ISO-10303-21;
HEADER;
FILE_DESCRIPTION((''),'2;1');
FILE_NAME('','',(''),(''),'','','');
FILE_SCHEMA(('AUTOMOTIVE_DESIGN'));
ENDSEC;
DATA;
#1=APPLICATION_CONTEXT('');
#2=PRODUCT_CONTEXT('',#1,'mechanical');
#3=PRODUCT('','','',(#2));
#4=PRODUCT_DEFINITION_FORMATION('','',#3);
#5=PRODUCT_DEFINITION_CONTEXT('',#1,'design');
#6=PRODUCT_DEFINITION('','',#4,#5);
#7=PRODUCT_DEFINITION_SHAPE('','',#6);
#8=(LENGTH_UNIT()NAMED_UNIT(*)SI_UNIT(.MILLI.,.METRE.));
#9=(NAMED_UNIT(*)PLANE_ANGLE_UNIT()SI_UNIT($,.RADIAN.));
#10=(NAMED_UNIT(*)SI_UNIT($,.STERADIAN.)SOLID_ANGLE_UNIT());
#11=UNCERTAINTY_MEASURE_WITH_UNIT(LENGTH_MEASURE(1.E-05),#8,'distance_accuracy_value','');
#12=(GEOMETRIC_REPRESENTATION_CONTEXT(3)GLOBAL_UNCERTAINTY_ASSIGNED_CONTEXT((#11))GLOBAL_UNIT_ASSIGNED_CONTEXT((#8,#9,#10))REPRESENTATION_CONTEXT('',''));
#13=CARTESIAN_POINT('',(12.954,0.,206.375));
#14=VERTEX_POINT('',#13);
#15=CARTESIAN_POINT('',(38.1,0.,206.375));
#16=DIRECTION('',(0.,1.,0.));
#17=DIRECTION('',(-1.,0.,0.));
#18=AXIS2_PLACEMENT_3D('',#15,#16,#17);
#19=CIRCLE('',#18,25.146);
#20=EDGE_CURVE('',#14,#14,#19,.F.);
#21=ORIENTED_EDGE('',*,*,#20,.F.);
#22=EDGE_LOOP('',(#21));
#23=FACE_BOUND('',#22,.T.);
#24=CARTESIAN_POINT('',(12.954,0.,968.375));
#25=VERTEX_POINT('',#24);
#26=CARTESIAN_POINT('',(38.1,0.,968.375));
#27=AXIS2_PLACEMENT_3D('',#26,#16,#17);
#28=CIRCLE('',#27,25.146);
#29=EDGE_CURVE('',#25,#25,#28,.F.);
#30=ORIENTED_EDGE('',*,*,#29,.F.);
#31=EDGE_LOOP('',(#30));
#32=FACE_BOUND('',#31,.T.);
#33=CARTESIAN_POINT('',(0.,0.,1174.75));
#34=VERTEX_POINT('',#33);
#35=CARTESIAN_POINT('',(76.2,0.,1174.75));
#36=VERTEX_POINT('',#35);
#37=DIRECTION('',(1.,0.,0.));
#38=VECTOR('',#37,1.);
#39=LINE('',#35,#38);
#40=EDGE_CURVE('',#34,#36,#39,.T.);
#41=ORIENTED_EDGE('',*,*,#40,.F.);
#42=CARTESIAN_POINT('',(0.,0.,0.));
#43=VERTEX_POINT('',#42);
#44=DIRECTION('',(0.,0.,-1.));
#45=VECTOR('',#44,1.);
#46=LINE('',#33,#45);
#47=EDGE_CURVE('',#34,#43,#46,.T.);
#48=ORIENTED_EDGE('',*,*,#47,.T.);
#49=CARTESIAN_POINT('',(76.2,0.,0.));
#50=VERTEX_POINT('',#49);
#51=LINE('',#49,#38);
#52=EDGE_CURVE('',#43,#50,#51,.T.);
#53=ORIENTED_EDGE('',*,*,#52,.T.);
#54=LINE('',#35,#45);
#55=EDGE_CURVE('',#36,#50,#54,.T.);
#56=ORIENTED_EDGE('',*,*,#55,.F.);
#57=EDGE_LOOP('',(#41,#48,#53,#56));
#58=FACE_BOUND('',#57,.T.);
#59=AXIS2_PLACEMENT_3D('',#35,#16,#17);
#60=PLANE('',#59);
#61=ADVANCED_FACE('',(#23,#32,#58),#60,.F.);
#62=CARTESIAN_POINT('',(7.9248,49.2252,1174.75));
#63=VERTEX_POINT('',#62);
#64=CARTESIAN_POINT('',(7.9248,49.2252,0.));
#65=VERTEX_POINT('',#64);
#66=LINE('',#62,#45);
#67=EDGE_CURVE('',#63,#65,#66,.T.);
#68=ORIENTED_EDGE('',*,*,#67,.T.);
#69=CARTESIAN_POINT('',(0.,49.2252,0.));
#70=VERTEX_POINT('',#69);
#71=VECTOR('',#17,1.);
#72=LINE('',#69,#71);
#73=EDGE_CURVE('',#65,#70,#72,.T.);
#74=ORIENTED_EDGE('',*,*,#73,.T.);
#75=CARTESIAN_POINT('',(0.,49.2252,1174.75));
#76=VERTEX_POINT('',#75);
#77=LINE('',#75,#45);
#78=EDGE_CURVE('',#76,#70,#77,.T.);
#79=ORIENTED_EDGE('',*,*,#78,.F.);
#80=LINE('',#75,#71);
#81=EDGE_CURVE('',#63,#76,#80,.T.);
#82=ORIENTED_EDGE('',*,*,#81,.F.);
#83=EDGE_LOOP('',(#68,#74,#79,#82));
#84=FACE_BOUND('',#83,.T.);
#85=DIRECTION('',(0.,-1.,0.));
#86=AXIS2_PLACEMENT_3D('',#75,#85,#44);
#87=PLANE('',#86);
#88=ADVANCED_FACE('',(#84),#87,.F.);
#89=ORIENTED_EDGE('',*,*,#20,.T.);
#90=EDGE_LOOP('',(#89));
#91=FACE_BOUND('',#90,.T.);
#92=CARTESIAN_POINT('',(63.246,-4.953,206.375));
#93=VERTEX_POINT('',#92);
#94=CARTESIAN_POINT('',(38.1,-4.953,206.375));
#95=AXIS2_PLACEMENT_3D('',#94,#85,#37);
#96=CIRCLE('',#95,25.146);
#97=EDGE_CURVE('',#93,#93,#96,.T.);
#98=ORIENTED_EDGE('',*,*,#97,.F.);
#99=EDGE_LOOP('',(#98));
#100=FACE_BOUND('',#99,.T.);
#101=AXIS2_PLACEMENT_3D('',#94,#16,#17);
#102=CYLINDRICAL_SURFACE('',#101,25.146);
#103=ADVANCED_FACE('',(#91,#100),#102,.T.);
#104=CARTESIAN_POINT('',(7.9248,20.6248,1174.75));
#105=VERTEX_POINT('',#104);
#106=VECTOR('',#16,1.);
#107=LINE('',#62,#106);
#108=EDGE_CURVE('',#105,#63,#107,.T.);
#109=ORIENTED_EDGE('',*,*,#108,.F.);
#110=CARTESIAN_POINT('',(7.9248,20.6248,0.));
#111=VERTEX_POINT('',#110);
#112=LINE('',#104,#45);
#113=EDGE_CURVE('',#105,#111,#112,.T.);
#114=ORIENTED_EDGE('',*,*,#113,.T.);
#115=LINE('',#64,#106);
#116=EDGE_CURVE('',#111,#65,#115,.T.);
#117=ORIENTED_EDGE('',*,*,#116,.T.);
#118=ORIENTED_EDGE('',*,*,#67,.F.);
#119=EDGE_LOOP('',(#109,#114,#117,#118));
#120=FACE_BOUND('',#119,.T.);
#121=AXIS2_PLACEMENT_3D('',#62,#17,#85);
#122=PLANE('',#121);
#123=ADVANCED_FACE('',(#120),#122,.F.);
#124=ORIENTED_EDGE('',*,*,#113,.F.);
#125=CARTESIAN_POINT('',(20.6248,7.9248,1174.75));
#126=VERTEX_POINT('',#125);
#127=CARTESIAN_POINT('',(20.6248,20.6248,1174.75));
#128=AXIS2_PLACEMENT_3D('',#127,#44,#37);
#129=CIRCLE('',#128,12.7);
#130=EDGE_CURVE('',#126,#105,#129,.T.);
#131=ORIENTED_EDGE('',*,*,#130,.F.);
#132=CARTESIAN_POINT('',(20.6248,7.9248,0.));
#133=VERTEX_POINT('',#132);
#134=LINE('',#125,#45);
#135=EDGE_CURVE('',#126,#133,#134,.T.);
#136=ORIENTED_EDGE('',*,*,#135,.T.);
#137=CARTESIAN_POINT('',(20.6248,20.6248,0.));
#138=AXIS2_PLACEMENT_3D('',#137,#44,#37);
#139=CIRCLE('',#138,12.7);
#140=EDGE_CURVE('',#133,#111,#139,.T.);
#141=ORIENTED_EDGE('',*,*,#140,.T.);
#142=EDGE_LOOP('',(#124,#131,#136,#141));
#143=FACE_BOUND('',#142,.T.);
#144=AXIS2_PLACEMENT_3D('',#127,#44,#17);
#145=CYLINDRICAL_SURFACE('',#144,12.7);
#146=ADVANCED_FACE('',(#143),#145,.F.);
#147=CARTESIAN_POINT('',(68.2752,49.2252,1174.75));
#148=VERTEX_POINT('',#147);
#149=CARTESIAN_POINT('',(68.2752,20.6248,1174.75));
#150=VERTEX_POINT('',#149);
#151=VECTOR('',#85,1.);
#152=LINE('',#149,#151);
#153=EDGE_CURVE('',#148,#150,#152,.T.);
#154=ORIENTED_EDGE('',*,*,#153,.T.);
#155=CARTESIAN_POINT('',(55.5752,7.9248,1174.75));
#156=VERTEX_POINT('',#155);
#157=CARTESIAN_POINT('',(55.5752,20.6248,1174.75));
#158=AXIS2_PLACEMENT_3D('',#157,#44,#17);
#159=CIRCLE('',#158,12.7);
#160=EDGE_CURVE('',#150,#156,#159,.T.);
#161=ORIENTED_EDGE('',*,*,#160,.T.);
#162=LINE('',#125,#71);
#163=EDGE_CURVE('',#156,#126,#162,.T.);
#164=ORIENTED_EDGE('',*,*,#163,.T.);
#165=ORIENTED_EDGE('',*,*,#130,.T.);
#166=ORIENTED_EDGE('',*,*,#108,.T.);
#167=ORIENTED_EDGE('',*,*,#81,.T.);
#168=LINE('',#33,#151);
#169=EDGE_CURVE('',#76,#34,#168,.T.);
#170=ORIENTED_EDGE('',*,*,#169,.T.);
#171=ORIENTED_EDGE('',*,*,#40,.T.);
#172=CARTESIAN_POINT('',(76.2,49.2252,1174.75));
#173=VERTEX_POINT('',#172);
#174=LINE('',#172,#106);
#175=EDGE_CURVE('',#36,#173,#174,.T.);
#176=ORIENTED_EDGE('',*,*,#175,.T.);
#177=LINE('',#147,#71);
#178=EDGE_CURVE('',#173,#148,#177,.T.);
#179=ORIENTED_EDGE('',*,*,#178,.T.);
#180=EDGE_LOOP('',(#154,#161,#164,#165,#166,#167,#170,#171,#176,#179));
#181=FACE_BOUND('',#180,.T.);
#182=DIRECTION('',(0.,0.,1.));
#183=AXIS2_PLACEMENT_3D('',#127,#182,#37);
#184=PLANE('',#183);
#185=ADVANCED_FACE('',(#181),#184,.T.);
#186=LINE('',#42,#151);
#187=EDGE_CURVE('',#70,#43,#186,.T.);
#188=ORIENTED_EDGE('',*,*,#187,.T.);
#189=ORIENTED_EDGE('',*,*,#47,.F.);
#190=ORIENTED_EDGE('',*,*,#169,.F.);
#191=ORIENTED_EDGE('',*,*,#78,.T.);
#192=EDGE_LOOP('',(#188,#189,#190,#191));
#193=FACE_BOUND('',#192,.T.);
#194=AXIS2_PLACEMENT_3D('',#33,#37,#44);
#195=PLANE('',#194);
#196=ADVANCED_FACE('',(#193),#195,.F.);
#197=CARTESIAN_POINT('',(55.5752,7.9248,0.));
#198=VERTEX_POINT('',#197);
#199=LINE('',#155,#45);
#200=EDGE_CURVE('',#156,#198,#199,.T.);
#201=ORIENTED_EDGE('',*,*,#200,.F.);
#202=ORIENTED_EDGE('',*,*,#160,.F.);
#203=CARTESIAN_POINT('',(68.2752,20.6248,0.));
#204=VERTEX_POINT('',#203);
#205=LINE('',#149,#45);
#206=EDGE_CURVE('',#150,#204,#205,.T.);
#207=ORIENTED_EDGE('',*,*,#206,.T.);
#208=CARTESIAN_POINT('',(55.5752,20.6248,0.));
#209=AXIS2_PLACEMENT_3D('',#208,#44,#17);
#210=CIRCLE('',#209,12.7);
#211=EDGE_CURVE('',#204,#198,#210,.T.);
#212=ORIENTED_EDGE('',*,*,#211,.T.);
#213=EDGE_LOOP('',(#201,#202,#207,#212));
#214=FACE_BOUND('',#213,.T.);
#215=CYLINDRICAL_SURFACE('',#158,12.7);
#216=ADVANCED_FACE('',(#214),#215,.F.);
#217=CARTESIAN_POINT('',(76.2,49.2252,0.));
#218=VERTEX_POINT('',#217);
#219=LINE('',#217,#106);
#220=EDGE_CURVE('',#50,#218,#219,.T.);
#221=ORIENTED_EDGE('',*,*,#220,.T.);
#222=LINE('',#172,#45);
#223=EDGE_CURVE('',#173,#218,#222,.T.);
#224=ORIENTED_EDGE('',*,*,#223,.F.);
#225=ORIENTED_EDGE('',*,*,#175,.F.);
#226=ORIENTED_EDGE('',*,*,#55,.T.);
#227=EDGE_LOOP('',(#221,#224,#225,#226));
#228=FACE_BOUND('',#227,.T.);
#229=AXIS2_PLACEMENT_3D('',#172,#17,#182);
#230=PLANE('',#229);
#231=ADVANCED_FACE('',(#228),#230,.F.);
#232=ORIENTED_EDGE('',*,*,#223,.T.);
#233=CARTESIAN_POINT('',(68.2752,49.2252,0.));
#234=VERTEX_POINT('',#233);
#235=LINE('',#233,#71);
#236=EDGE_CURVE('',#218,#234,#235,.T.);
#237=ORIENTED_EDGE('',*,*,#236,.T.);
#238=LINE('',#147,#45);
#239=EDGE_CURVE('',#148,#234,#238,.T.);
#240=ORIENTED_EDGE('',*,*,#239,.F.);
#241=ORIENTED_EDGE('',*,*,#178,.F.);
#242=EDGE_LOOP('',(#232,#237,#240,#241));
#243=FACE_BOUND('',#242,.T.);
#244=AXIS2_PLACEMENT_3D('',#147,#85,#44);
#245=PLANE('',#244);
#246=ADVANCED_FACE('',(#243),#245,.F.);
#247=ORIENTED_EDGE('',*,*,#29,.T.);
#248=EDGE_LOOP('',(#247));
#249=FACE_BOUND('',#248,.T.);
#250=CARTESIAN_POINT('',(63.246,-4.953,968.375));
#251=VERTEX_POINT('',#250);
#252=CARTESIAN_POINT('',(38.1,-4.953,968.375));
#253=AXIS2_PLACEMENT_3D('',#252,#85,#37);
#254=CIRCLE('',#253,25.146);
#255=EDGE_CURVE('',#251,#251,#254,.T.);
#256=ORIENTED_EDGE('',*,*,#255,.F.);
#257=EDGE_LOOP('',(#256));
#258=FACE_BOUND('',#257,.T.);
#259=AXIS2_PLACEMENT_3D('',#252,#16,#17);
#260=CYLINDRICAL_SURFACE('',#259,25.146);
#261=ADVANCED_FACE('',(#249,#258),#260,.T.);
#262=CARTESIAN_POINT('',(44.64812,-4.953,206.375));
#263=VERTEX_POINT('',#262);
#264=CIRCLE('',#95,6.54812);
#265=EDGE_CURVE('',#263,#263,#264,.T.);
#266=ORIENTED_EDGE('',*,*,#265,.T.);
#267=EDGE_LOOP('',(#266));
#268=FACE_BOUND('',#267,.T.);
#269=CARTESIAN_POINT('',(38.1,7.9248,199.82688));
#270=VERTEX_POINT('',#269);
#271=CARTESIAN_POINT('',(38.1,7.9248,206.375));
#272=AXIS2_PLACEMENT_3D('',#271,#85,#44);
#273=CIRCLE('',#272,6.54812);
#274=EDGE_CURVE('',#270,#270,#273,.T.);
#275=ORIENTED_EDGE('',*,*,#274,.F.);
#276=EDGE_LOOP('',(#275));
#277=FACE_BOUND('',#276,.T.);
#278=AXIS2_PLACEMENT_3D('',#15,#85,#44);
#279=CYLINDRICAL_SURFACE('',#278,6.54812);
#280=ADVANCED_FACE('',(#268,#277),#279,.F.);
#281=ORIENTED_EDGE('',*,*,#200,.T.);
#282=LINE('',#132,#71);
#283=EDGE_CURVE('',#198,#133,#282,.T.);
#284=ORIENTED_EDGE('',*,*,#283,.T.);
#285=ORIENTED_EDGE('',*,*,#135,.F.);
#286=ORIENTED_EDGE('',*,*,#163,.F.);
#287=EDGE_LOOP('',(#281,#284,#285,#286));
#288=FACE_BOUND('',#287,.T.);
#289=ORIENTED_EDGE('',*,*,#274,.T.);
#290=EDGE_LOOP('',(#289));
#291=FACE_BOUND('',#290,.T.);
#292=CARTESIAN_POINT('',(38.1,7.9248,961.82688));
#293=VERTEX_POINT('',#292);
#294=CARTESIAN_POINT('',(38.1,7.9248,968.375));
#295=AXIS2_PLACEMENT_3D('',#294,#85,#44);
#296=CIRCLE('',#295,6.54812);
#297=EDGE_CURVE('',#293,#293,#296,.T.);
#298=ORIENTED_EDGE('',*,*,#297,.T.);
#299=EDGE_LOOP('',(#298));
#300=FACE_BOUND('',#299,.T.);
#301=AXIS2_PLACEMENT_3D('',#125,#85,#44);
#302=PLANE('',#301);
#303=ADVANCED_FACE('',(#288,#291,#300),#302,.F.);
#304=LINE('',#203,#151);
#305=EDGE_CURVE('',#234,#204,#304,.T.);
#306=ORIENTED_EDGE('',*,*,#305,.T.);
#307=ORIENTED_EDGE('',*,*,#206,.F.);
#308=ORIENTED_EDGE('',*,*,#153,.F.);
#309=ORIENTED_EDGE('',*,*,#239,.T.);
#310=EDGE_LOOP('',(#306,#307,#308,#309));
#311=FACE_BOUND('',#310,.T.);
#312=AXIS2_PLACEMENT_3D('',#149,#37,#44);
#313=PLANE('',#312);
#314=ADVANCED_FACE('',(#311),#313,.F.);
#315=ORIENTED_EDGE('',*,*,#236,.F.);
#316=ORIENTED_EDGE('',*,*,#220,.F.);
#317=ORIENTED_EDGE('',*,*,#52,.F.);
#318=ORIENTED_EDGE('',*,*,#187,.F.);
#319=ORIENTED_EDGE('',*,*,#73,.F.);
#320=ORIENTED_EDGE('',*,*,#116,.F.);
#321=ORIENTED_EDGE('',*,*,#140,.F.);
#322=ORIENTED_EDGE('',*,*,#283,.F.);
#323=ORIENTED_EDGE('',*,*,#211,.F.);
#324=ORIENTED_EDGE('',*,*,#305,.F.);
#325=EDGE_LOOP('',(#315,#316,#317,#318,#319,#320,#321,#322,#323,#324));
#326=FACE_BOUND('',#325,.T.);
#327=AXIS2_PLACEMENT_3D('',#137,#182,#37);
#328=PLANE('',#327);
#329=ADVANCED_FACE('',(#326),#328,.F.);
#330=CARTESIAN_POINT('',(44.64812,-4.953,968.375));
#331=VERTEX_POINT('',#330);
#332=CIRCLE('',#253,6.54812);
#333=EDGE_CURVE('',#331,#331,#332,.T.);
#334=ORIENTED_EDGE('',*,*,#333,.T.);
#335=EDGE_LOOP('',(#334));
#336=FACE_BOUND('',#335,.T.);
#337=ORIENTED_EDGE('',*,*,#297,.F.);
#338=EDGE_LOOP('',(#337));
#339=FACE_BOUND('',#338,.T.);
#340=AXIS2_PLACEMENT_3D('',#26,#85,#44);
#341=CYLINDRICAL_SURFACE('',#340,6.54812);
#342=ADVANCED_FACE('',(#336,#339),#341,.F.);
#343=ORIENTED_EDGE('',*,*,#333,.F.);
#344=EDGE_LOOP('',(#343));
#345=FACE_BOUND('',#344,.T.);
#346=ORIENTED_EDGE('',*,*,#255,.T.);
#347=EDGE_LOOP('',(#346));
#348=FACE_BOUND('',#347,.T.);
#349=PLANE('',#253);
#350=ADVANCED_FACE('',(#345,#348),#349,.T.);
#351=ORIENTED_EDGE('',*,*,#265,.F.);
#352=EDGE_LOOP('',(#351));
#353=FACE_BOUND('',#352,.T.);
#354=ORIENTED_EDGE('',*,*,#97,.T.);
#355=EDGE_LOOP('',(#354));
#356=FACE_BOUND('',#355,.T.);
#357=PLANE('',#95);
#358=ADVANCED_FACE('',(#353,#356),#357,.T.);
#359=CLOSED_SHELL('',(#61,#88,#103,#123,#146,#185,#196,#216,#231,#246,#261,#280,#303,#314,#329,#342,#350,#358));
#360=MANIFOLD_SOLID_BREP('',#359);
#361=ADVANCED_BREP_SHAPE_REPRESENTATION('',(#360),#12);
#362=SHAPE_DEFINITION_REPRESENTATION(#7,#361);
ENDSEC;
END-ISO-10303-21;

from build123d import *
from build123d.topology import SkipClean

# Parameters (mm, degrees)
BOSS_EXTRUDE1_DEPTH     = 1174.75
F_1_2_CLEARANCE_HOLE1_D = 13.09624
SKETCH116_R             = 25.146
SKETCH116_R_2           = 6.54812
BOSS_EXTRUDE2_DEPTH     = 4.953


with BuildPart() as part:
    # Sketch113 → Boss-Extrude1 (new body)
    with BuildSketch(Plane.XY):
        with BuildLine():
            Line((0, 0), (0, 49.2252))
            Line((0, 49.2252), (7.9248, 49.2252))
            Line((7.9248, 49.2252), (7.9248, 20.6248))
            ThreePointArc((7.9248, 20.6248), (11.644543879, 11.644543879), (20.6248, 7.9248))
            Line((20.6248, 7.9248), (55.5752, 7.9248))
            ThreePointArc((55.5752, 7.9248), (64.555456121, 11.644543879), (68.2752, 20.6248))
            Line((68.2752, 20.6248), (68.2752, 49.2252))
            Line((68.2752, 49.2252), (76.2, 49.2252))
            Line((76.2, 49.2252), (76.2, 0))
            Line((76.2, 0), (0, 0))
        make_face()
    extrude(amount=BOSS_EXTRUDE1_DEPTH)

    # 1/2 Clearance Hole1 (through all)
    with Locations(Plane(origin=(38.1, 0, 206.375), x_dir=(0, 0, -1), z_dir=(0, -1, 0))):
        with Locations((0, 0), (-762, 0)):
            Hole(F_1_2_CLEARANCE_HOLE1_D / 2)

    # Sketch116 → Boss-Extrude2 (add)
    # profile 1 of 2: a face of its own
    with SkipClean():  # the faces are left unmerged after this step: merging them gives an invalid solid
        with BuildSketch(Plane.XZ):
            with Locations((38.1, 968.375)):
                Circle(SKETCH116_R)
            with Locations((38.1, 968.375)):
                Circle(SKETCH116_R_2, mode=Mode.SUBTRACT)
        # profile 2 of 2: a face of its own
        with BuildSketch(Plane.XZ):
            with Locations((38.1, 206.375)):
                Circle(SKETCH116_R)
            with Locations((38.1, 206.375)):
                Circle(SKETCH116_R_2, mode=Mode.SUBTRACT)
        extrude(amount=BOSS_EXTRUDE2_DEPTH)
    add(part.part.scale(1), mode=Mode.REPLACE)  # the faces are merged on a copy


solid = part.part
